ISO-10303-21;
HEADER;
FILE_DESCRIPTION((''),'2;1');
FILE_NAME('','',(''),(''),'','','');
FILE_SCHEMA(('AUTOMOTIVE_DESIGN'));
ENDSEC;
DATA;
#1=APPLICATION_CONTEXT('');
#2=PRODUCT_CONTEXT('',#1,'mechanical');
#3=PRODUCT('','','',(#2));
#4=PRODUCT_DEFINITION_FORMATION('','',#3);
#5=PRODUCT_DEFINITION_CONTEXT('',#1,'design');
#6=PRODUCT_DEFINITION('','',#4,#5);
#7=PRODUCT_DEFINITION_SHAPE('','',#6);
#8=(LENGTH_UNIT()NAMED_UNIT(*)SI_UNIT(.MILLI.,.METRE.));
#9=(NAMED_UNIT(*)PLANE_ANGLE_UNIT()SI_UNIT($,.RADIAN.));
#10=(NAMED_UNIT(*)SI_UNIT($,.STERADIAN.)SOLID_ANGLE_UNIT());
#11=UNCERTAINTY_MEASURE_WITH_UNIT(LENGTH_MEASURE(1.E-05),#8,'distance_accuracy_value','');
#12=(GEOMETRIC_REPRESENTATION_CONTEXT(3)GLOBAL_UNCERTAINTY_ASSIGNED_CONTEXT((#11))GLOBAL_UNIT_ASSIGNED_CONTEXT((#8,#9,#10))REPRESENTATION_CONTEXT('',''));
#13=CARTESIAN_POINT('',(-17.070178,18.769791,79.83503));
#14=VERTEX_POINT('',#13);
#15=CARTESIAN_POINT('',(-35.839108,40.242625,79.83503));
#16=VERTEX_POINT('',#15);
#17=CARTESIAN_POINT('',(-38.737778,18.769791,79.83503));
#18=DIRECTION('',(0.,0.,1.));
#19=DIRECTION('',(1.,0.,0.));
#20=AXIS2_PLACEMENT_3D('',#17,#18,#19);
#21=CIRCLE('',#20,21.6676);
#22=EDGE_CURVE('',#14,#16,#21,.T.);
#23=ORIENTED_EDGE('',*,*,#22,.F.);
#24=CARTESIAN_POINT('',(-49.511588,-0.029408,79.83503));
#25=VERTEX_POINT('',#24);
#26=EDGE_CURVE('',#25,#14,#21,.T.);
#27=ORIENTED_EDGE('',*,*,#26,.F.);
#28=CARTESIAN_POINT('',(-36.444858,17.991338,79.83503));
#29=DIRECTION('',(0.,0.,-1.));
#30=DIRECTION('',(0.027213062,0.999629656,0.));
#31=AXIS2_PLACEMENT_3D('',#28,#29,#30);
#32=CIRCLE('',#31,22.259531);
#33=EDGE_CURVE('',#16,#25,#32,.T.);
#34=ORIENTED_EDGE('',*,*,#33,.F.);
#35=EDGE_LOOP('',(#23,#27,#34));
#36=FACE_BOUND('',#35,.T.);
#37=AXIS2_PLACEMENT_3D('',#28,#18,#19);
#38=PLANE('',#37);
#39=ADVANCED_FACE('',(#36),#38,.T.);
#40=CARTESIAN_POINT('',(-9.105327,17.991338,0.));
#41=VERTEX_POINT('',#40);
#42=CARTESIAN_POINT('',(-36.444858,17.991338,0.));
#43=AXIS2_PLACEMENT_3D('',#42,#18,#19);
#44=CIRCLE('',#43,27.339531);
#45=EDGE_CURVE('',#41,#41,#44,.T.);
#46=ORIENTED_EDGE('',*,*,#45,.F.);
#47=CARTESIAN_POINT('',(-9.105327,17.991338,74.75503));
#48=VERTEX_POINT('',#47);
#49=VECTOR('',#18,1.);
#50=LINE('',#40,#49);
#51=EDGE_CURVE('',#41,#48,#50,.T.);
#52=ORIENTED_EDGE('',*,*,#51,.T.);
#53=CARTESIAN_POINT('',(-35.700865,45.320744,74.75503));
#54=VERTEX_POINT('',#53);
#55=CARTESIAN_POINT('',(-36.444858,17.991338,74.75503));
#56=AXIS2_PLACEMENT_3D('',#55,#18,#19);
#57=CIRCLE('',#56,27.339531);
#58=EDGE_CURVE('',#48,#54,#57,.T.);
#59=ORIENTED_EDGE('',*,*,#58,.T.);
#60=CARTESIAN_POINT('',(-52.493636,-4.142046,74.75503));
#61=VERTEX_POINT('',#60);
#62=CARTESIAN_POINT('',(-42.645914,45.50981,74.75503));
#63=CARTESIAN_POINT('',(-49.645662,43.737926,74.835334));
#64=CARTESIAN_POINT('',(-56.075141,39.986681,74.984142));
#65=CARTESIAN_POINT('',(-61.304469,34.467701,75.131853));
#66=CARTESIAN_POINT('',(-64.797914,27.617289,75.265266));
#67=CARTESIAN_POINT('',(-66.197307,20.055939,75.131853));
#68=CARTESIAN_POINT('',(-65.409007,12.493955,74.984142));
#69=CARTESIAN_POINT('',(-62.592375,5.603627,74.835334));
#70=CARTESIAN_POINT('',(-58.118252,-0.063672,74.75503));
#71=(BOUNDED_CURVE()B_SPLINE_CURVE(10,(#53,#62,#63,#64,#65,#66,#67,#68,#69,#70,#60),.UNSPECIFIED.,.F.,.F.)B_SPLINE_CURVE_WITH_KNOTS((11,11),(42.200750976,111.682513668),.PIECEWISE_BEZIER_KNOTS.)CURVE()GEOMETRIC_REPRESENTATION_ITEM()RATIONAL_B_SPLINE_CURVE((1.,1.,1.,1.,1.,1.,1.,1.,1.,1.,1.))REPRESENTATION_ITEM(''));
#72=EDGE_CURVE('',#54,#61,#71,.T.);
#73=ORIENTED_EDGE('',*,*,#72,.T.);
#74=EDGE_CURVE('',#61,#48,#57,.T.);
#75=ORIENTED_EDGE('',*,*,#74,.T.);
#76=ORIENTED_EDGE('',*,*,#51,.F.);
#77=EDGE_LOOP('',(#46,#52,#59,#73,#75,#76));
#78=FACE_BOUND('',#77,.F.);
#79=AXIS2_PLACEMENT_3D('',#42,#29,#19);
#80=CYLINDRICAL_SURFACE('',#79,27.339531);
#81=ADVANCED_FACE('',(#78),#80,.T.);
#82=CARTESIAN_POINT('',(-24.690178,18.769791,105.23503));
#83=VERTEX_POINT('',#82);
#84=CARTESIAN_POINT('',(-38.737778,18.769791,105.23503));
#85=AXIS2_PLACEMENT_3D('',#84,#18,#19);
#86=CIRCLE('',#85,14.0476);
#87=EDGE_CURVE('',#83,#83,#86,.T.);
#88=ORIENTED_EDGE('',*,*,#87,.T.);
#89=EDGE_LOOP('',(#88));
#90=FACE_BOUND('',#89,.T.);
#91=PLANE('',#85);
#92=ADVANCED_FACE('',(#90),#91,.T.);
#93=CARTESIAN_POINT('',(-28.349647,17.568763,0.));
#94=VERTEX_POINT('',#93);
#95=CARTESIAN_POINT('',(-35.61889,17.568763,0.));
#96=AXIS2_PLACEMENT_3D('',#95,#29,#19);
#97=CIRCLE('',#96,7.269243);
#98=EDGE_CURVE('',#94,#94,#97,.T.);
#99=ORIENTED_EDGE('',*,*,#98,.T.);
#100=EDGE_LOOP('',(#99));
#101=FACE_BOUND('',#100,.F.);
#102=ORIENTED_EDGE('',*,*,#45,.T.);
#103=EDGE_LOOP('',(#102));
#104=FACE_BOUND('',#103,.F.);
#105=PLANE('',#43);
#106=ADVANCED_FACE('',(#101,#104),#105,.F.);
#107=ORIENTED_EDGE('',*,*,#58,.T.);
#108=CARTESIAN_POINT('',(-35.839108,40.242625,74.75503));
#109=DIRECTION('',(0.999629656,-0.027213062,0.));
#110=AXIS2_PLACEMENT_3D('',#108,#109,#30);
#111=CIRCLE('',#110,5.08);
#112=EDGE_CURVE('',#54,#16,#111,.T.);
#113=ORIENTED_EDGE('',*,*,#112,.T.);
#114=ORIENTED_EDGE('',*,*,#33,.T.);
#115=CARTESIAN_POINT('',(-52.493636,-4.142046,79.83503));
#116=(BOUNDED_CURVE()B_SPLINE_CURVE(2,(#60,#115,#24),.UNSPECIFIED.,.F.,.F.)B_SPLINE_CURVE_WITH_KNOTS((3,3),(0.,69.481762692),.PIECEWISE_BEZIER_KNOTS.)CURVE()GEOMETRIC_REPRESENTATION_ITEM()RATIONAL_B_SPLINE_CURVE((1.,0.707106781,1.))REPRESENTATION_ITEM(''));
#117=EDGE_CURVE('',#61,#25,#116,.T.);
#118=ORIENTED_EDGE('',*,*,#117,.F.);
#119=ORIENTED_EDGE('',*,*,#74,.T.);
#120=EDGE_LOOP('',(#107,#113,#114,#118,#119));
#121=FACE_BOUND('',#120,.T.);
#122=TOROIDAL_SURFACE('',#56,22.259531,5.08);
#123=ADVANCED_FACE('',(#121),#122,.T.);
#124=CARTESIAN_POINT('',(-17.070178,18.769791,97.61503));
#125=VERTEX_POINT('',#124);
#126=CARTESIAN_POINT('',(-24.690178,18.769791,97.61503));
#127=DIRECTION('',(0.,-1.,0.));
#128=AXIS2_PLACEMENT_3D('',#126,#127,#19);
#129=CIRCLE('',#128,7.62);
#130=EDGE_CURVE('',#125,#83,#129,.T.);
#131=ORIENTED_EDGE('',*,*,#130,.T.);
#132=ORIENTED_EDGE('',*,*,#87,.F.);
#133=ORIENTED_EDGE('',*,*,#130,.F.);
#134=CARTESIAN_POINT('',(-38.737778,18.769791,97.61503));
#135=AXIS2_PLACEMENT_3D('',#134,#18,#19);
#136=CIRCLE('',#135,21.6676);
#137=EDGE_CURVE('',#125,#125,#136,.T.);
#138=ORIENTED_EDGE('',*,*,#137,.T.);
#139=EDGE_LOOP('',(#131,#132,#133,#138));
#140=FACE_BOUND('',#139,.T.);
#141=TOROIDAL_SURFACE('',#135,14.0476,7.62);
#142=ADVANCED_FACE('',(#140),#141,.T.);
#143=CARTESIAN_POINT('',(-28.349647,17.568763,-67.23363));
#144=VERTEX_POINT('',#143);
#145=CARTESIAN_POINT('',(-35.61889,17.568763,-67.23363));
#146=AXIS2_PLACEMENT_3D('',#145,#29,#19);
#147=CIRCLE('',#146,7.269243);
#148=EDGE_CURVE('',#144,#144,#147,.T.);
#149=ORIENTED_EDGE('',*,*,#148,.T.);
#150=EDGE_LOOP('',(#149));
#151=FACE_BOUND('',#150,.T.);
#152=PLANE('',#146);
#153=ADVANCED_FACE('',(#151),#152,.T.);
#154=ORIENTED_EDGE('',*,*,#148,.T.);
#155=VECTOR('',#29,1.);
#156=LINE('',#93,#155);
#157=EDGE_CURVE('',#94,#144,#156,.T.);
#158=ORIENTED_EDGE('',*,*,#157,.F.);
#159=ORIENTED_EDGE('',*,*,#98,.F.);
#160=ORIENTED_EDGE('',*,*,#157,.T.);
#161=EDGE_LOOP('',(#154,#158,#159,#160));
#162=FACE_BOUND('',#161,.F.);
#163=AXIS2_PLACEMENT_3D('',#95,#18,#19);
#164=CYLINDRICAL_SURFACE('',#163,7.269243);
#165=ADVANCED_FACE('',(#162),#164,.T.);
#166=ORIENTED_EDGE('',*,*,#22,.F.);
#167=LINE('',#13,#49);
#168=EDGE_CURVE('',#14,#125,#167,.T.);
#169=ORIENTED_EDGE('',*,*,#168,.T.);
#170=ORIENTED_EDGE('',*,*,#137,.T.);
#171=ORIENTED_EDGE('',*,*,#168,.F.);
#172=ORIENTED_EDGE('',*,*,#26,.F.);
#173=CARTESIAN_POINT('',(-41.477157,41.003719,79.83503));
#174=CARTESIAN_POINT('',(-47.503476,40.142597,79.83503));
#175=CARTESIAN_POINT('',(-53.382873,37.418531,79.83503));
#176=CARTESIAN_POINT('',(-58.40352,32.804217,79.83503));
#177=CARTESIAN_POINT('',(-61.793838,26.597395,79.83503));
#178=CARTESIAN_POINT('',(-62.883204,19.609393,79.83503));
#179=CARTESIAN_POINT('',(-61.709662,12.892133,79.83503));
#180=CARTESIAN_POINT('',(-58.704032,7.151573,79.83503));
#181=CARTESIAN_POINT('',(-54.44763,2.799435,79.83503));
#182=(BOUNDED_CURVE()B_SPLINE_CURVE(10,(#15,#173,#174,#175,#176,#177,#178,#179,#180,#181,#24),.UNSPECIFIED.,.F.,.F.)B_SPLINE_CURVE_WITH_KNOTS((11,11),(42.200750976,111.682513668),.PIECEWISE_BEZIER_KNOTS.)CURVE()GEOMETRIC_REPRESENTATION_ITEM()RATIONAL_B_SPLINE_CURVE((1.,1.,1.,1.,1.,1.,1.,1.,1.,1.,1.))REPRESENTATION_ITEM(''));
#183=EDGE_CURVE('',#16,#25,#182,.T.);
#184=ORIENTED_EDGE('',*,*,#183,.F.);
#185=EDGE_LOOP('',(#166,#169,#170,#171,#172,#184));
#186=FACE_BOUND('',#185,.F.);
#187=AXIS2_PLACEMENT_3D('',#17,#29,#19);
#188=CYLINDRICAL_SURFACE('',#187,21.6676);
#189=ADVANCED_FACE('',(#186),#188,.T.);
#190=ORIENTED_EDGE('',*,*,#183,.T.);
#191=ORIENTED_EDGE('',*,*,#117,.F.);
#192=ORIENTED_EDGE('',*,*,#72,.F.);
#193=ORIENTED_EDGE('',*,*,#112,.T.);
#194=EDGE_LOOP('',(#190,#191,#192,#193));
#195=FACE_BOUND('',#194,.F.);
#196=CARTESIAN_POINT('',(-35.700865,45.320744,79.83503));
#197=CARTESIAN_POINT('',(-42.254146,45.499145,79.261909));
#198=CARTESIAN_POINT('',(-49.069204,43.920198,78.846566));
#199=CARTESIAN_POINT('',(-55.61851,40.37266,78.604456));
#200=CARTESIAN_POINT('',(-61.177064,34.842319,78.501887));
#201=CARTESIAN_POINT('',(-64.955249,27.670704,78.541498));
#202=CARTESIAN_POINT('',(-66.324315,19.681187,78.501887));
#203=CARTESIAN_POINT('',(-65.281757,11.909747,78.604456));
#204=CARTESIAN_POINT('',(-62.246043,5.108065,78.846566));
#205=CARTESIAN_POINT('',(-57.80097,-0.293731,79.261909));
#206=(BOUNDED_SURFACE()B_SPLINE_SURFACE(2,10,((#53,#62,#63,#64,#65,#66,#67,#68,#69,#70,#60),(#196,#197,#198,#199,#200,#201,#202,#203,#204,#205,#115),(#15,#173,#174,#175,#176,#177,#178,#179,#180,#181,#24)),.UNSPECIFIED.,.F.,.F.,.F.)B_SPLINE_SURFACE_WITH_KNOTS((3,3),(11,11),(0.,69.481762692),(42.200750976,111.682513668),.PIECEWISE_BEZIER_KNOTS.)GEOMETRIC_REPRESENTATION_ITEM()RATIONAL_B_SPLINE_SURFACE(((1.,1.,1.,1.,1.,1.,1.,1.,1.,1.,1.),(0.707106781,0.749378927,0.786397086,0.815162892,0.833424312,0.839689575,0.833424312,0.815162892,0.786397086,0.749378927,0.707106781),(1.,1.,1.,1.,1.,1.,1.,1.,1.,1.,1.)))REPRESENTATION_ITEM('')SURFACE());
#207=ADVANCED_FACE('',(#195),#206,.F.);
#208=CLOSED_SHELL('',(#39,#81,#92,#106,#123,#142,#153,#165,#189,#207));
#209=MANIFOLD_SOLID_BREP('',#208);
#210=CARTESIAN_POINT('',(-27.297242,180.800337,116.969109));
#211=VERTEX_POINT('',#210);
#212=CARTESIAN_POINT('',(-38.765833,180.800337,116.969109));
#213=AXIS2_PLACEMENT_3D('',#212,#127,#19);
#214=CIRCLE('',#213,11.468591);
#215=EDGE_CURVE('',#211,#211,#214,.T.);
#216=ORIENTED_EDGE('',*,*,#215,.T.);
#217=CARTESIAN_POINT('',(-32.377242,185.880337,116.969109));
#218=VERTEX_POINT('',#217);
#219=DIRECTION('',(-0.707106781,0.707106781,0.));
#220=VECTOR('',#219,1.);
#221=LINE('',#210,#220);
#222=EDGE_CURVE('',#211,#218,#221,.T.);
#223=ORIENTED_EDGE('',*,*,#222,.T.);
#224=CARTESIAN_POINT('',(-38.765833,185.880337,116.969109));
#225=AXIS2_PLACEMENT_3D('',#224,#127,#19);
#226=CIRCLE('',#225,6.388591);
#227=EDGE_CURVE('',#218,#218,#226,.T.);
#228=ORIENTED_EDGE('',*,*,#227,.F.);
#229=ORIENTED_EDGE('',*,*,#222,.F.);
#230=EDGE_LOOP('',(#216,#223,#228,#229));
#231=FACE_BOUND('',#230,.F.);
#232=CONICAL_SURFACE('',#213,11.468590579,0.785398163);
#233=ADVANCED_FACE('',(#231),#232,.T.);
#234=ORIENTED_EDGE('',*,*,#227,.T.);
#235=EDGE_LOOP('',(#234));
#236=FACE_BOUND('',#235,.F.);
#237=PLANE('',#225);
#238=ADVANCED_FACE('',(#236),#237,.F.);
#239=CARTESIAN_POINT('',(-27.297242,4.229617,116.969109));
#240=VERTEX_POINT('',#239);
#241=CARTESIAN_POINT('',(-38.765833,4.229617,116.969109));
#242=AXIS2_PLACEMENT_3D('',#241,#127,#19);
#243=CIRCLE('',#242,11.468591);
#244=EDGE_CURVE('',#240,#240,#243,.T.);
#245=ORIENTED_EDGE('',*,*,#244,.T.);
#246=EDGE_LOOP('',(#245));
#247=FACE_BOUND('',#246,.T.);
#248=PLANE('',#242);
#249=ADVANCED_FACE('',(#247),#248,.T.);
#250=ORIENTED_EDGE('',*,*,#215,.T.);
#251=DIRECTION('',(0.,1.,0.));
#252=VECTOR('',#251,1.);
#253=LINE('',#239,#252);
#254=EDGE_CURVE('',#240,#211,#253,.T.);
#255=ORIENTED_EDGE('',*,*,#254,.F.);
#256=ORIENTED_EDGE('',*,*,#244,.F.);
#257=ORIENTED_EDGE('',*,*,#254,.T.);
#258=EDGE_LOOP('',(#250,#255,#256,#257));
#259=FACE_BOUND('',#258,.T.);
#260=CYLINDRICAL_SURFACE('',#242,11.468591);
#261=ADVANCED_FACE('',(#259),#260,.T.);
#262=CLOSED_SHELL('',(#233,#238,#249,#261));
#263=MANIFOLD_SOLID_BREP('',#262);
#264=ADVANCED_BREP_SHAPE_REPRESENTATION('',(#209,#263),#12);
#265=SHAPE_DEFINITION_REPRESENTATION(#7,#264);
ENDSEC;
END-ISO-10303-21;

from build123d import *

# Parameters (mm, degrees)
F0_R     = 27.3395312078
F1_DEPTH = 79.83503
F2_R     = 21.6676000415
F3_DEPTH = 25.4
F6_R     = 11.4685905788
F7_DEPTH = 181.65072
F8_R     = 7.2692434599
F9_DEPTH = 67.23363
F10_R    = 5.08
F11_R    = 7.62
F12_SIZE = 5.08


with BuildPart() as f1:
    # F0 (on Top) → F1 (new body)
    with BuildSketch(Plane.XY):
        with Locations((-36.4448577166, 17.9913379252)):
            Circle(F0_R)
    extrude(amount=F1_DEPTH)

    # F2 (on face) → F3 (join)
    with BuildSketch(Plane.XY.offset(79.83503)):
        with Locations((-38.7377776206, 18.7697913498)):
            Circle(F2_R)
    extrude(amount=F3_DEPTH)

    # F8 (on face) → F9 (join)
    with BuildSketch(Plane(origin=(0, 0, 0), x_dir=(1, 0, 0), z_dir=(0, 0, -1))):
        with Locations((-35.6188900769, -17.5687633455)):
            Circle(F8_R)
    extrude(amount=F9_DEPTH)

    # F10
    f10_edges = [f1.edges().sort_by_distance(p)[0] for p in [
        (-63.784389, 17.991338, 79.83503),
    ]]
    fillet(f10_edges, radius=F10_R)

    # F11
    f11_edges = [f1.edges().sort_by_distance(p)[0] for p in [
        (-60.405378, 18.769791, 105.23503),
    ]]
    fillet(f11_edges, radius=F11_R)


with BuildPart() as f7:
    # F6 (on face) → F7 (new body)
    with BuildSketch(Plane.XZ.offset(-4.2296172571)):
        with Locations((-38.7658327818, 116.9691085815)):
            Circle(F6_R)
    extrude(amount=-F7_DEPTH)

    # F12
    f12_edges = [f7.edges().sort_by_distance(p)[0] for p in [
        (-50.234423, 185.880337, 116.969109),
    ]]
    chamfer(f12_edges, length=F12_SIZE)


solid = Compound([f1.part, f7.part])
